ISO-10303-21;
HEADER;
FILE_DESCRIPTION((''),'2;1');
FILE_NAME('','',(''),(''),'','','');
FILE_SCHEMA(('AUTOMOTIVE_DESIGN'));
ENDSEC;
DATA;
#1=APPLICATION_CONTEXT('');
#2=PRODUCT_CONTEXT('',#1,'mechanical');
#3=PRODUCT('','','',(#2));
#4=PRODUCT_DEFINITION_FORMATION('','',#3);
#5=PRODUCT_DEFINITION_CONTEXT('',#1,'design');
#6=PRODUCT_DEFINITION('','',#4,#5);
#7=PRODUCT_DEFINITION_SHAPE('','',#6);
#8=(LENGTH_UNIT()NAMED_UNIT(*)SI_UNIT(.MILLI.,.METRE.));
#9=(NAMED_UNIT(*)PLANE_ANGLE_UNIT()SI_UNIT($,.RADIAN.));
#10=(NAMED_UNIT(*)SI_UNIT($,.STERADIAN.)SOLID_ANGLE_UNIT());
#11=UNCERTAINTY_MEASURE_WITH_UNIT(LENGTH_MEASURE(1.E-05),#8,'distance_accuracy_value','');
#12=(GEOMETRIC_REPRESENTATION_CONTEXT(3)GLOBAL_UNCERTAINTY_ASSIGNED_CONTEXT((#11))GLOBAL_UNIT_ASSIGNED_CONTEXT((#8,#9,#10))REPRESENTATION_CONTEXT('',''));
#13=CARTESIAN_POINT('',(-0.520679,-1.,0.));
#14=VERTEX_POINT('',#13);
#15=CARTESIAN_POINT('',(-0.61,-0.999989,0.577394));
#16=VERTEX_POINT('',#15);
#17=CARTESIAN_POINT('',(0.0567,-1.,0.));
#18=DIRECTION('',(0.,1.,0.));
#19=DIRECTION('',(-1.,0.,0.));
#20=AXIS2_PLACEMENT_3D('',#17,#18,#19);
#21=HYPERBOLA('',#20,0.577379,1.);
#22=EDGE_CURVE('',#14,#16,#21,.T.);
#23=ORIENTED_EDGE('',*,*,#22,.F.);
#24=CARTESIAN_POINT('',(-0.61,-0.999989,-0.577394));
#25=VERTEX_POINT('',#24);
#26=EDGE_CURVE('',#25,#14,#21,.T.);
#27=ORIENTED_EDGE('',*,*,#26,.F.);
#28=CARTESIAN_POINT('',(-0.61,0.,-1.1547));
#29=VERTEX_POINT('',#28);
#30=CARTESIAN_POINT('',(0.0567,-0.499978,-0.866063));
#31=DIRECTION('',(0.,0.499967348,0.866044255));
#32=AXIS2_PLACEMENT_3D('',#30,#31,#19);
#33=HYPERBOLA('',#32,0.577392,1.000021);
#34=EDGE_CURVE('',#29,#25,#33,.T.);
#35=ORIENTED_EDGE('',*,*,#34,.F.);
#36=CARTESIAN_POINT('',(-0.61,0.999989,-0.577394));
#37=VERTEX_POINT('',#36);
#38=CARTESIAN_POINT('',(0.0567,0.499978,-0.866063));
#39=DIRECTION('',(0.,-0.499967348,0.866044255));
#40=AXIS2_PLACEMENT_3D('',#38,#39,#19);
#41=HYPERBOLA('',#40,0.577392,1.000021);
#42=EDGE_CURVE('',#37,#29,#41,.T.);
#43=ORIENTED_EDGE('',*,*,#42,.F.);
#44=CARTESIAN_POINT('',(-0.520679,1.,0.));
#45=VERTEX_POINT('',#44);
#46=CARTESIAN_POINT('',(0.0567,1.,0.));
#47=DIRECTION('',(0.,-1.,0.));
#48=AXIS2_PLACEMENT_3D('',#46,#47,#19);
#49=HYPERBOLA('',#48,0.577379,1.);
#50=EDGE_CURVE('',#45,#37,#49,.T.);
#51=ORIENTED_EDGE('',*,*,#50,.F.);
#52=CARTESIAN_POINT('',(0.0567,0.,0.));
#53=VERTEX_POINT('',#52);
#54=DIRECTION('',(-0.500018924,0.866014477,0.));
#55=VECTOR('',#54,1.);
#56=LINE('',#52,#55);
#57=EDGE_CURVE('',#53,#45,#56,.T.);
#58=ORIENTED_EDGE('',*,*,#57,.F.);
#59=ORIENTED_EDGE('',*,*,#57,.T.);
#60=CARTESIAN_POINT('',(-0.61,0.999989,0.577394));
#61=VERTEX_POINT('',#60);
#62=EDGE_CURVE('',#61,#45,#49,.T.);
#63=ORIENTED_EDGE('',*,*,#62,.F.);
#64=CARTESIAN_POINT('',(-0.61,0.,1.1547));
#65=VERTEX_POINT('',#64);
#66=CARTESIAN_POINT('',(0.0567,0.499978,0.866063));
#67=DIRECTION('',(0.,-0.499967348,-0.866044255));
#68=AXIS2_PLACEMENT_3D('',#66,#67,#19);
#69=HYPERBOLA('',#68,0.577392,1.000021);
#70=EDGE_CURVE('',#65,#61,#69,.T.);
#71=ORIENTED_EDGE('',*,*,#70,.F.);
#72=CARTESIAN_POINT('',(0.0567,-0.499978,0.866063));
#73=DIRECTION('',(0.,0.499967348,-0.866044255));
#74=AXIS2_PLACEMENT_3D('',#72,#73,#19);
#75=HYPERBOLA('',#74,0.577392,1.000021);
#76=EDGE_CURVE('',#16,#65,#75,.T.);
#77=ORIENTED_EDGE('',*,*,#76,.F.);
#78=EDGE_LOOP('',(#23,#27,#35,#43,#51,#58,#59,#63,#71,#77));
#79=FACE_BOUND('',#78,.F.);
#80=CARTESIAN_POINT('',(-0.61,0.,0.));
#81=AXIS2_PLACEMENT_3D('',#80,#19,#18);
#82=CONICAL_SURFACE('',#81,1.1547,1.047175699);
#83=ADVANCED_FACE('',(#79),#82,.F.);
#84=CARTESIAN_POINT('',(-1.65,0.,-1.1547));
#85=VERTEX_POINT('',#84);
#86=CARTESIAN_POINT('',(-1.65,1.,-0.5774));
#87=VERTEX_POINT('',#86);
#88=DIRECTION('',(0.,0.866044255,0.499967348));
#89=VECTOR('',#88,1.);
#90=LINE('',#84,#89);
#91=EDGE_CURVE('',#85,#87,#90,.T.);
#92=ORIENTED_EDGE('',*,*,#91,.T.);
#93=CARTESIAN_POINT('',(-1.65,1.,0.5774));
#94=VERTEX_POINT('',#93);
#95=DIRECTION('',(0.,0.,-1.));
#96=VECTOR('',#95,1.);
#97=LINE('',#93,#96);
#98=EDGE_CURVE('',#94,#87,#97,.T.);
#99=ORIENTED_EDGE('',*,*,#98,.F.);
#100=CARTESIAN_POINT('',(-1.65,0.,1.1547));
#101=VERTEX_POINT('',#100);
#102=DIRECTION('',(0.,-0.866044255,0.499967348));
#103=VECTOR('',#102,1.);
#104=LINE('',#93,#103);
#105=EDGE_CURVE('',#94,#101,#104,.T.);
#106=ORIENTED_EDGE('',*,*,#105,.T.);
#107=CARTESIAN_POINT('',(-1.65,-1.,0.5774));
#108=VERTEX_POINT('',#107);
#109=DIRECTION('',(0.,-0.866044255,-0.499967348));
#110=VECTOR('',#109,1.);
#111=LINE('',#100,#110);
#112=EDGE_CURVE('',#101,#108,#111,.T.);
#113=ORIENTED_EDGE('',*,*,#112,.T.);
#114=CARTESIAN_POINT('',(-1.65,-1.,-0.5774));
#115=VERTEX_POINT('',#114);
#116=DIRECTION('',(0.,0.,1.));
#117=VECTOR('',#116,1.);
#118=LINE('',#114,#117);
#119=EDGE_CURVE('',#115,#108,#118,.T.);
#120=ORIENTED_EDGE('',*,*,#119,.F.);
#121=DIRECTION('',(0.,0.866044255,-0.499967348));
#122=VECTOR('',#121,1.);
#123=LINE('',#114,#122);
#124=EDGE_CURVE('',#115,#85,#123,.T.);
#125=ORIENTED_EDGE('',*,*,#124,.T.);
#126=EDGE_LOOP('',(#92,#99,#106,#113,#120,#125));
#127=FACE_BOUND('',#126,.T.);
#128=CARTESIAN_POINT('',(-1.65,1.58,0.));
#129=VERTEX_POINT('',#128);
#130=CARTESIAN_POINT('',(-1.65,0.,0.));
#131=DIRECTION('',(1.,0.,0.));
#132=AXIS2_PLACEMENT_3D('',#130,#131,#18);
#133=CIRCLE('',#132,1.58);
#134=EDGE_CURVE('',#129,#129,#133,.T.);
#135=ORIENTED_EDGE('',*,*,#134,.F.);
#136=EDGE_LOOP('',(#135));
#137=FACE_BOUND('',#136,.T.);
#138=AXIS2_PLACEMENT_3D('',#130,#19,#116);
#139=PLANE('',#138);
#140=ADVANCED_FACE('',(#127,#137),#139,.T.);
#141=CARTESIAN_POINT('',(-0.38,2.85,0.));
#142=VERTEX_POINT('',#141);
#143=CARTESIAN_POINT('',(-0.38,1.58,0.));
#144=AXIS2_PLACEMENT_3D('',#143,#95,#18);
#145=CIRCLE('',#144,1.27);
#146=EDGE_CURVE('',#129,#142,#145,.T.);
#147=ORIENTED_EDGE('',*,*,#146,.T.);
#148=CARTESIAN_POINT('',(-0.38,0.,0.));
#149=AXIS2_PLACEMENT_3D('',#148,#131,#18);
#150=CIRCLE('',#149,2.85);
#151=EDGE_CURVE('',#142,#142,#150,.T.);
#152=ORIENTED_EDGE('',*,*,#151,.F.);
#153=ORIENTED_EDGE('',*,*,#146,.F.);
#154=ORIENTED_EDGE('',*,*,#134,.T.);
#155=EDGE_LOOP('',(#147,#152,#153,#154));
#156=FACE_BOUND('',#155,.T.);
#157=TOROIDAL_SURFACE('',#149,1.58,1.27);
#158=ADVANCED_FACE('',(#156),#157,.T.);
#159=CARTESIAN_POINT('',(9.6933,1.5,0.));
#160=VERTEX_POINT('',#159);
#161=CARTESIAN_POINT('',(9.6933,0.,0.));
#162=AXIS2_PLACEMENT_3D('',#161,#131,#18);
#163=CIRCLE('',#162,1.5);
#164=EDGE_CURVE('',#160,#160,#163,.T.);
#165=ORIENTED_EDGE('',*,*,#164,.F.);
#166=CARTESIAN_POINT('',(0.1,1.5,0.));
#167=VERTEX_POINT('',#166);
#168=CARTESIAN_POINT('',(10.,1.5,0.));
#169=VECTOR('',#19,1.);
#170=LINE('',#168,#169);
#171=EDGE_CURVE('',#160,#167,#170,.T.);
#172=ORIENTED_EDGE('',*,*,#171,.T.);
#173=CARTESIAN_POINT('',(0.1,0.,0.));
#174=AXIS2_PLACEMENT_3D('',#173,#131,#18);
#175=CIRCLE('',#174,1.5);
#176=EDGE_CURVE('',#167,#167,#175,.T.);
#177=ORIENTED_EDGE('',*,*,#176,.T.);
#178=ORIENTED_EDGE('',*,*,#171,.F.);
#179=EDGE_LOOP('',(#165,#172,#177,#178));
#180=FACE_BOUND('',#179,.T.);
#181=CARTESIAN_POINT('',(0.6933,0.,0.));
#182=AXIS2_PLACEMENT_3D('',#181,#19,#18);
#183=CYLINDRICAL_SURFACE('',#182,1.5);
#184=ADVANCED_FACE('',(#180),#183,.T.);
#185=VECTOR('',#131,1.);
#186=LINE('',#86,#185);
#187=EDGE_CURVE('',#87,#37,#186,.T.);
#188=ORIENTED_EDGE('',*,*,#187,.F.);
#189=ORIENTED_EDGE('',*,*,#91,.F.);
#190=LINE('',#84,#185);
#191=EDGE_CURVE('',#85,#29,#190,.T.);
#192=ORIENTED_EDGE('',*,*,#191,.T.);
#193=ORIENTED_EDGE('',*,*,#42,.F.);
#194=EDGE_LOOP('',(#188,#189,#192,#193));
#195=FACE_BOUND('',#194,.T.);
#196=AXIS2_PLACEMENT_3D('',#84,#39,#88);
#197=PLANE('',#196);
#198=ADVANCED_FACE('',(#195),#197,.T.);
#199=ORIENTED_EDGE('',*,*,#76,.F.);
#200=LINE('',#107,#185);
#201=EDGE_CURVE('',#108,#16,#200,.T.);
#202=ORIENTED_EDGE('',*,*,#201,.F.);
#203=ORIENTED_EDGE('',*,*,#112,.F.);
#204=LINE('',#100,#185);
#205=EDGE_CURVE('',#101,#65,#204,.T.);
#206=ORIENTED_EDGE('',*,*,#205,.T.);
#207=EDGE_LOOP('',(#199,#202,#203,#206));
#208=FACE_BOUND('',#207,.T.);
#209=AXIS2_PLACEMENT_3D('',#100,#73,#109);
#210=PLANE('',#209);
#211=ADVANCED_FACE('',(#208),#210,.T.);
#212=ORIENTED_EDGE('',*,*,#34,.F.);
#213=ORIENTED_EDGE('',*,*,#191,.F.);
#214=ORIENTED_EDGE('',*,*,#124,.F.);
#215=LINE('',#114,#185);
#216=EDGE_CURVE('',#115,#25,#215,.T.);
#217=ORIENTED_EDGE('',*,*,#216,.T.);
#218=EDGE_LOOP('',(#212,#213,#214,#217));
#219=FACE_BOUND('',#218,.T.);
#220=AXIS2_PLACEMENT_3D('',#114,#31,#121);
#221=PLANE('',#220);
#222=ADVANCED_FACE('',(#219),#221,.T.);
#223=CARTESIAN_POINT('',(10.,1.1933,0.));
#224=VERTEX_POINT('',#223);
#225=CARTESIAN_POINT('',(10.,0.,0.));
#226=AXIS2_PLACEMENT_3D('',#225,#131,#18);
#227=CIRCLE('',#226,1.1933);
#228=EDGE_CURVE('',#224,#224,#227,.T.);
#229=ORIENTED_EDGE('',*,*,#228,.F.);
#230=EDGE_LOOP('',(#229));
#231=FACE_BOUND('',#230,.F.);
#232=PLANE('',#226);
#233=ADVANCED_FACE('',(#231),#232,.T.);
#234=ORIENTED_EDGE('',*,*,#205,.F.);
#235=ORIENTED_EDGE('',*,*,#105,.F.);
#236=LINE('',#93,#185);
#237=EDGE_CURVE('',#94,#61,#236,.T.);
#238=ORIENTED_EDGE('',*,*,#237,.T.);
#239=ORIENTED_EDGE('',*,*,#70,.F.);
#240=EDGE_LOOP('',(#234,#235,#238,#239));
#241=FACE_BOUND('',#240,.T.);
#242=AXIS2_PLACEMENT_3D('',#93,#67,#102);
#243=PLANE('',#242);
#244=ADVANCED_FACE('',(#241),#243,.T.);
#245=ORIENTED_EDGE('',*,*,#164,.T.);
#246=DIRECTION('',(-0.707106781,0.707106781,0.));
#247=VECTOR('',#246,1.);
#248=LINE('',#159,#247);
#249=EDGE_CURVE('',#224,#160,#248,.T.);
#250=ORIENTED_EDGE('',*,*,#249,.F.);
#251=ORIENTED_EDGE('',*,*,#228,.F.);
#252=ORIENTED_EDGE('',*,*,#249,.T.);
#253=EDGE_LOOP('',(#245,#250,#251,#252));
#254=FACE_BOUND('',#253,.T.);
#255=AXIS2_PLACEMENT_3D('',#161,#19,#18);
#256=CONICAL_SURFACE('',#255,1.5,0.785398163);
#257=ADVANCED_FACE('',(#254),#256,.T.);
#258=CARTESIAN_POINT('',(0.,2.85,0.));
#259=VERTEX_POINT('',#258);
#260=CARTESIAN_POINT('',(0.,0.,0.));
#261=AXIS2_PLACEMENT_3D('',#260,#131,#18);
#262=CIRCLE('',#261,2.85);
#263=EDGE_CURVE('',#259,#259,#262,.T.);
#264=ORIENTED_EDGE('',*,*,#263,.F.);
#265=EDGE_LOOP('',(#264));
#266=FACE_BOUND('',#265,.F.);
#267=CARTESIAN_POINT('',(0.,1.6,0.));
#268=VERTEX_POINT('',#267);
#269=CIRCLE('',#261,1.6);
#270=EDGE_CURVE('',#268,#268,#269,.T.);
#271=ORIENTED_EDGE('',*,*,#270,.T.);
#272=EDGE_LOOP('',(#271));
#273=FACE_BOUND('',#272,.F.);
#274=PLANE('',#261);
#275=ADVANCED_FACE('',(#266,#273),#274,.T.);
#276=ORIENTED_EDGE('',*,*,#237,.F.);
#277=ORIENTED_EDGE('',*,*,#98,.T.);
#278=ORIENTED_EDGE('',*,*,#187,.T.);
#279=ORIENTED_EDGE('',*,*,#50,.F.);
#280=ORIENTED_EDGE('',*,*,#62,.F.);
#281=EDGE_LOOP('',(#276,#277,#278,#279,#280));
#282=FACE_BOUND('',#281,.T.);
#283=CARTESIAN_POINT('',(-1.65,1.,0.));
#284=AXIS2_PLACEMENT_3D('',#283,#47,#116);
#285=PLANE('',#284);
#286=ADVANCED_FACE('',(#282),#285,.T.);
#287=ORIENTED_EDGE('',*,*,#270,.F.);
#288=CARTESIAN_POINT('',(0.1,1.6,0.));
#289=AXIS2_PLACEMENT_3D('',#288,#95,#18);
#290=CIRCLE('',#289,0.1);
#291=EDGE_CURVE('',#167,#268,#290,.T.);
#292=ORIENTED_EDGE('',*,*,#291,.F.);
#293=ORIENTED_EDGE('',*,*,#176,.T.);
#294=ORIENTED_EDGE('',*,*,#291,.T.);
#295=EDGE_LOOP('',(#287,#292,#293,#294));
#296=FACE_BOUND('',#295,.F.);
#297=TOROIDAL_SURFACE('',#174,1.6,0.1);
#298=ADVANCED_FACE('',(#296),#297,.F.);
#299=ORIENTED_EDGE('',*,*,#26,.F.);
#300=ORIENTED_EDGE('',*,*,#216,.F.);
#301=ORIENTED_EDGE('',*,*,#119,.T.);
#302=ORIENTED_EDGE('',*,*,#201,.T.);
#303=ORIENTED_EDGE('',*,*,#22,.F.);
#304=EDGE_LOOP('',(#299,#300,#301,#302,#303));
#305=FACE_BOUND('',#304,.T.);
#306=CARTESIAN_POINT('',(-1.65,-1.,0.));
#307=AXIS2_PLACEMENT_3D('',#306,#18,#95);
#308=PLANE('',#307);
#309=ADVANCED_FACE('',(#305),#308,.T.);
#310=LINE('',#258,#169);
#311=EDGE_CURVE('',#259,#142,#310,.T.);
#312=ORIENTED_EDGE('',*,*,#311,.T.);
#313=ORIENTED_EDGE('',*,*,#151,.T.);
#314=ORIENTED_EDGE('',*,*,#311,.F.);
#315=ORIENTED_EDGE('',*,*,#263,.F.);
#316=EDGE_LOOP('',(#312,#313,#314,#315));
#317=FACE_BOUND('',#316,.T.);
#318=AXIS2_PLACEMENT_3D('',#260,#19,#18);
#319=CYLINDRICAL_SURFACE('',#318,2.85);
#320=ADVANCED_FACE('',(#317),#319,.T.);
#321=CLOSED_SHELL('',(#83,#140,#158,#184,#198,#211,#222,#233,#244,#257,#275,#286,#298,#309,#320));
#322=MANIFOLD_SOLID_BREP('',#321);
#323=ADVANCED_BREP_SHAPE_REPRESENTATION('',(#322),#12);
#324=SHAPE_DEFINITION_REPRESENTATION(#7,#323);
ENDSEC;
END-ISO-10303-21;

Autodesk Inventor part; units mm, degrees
ref_plane "YZ Plane" through (0, 0, 0) normal (1, 0, 0) x (0, 1, 0)
ref_plane "XZ Plane" through (0, 0, 0) normal (0, 1, 0) x (-1, 0, 0)
sketch "Skizze1" plane through (0, 0, 0) normal (0, 0, 1) x (1, 0, 0)
  line L0 (0.0567, 0) -> (10, 0)
  line L1 (10, 0) -> (10, 1.5)
  line L2 (10, 1.5) -> (1, 1.5)
  line L3 (1, 1.5) -> (0.6933, 1.5)
  line L4 (0.6933, 1.5) -> (0, 1.5)
  line L5 (0, 1.5) -> (0, 2.85)
  line L6 (0, 2.85) -> (-1.65, 2.85)
  line L7 (-1.65, 2.85) -> (-1.65, 1.1547)
  line L8 (-1.65, 1.1547) -> (-0.61, 1.1547)
  line L9 (-0.61, 1.1547) -> (0.0567, 0)
  line L10 (-3.98, 0) -> (12.33, 0) projected
  line L11 (0, -0.57) -> (0, 3.42) projected
  line L12 (1, 1.5) -> (0, 1.5) construction
  dimension "d0" = 9
  dimension "d1" = 0.3067
  dimension "d2" = 1.65
  dimension "d3" = 1.04
  dimension "d4" = 60
  dimension "d5" = 3
  dimension "d6" = 3
  dimension "d7" = 2.3094
  dimension "d8" = 5.7
  dimension "d19" = 10
revolve "Körper" add sketch "Skizze1" angle 360 about axis through (0.0567, 0, 0) along (1, 0, 0) contours L9 L11 L4 L3 L2 L1 L0 | L9 L8 L7 L6 L5 L11
sketch "Skizze2" plane through (-1.65, 0, 0) normal (-1, 0, 0) x (0, 0, 1)
  circle A0 centre (0, 0) radius 1.1547 projected
  line L0 (0, -3.99) -> (0, 3.99) projected
  line L1 (-3.99, 0) -> (3.99, 0) projected
  line L2 (1.1547, 0) -> (0.5774, -1)
  line L3 (0.5774, -1) -> (-0.5774, -1)
  line L4 (-0.5774, -1) -> (-1.1547, 0)
  line L5 (-1.1547, 0) -> (-0.5774, 1)
  line L6 (-0.5774, 1) -> (0.5774, 1)
  line L7 (0.5774, 1) -> (1.1547, 0)
extrude "Loch" add sketch "Skizze2" against normal up to next contours L7 A0 | A0 L2 | L6 L0 A0 | A0 L0 L3 | L0 L6 A0 | A0 L3 L0 | L4 A0 | A0 L5
fillet "Rundung1" radius 1.27 1 edges at (-1.65, -2.85, 0)
thread "Gewinde" size "M3x0.5" class "4g6g" standard "ANSI Metric M Profile" length 9
chamfer "Fase1" distance 0.3067 distance2 0.3067 1 edges at (10, -1.5, 0) measured on face at (10, -0.6587, -0.1791)
fillet "Rundung2" radius 0.1 1 edges at (0, -1.5, 0)
ref_plane "Work Plane1" through (30, 0, 0) normal (0, -0.5, 0.8660254) x (1, 0, 0)
equation "\"d0\" = GEL"
equation "\"d1\" = GAL"
equation "\"d2\" = KOH"
equation "\"d3\" = INTI"
equation "\"d5\" = GD"
equation "\"d6\" = BDM"
equation "\"d7\" = 1.1547 * SW"
equation "\"d8\" = KOD"
equation "\"d19\" = NLG"
equation "\"d16\" = RR"
equation "\"d12\" = GEL"
equation "\"d14\" = -0.5 * SPD + 0.5 * GD"
equation "\"d15\" = GUL"
equation "\"d29\" = R"
equation "\"GD\" = NND"
equation "\"NLG\" = 10"
equation "\"GEL\" = 9"
equation "\"KOD\" = 5.7"
equation "\"KOH\" = 1.65"
equation "\"INTI\" = 1.04"
equation "\"GAL\" = 0.61345 * PTC"
equation "\"GUL\" = 0.61345 * PTC"
equation "\"BDM\" = NND"
equation "\"SW\" = 2"
equation "\"RR\" = 1.27"
equation "\"SPD\" = 2.38655"
equation "\"d28\" = R"
equation "\"R\" = 0.1"
equation "\"TOA\" = 30deg"
equation "\"THREADDIA\" = 3"
equation "\"KOD1\" = KOD - 2 * RR"
equation "\"PTC\" = 0.5"
equation "\"NND\" = 3"
equation "\"E0\" = 1.155 * SW"
equation "\"GD1\" = THREADDIA - 1.2269 * PTC"
properties part number "ANSI B18.3.4M - M3 x 0.5 x 10, FHSBHCSM" material "Steel, Mild"
